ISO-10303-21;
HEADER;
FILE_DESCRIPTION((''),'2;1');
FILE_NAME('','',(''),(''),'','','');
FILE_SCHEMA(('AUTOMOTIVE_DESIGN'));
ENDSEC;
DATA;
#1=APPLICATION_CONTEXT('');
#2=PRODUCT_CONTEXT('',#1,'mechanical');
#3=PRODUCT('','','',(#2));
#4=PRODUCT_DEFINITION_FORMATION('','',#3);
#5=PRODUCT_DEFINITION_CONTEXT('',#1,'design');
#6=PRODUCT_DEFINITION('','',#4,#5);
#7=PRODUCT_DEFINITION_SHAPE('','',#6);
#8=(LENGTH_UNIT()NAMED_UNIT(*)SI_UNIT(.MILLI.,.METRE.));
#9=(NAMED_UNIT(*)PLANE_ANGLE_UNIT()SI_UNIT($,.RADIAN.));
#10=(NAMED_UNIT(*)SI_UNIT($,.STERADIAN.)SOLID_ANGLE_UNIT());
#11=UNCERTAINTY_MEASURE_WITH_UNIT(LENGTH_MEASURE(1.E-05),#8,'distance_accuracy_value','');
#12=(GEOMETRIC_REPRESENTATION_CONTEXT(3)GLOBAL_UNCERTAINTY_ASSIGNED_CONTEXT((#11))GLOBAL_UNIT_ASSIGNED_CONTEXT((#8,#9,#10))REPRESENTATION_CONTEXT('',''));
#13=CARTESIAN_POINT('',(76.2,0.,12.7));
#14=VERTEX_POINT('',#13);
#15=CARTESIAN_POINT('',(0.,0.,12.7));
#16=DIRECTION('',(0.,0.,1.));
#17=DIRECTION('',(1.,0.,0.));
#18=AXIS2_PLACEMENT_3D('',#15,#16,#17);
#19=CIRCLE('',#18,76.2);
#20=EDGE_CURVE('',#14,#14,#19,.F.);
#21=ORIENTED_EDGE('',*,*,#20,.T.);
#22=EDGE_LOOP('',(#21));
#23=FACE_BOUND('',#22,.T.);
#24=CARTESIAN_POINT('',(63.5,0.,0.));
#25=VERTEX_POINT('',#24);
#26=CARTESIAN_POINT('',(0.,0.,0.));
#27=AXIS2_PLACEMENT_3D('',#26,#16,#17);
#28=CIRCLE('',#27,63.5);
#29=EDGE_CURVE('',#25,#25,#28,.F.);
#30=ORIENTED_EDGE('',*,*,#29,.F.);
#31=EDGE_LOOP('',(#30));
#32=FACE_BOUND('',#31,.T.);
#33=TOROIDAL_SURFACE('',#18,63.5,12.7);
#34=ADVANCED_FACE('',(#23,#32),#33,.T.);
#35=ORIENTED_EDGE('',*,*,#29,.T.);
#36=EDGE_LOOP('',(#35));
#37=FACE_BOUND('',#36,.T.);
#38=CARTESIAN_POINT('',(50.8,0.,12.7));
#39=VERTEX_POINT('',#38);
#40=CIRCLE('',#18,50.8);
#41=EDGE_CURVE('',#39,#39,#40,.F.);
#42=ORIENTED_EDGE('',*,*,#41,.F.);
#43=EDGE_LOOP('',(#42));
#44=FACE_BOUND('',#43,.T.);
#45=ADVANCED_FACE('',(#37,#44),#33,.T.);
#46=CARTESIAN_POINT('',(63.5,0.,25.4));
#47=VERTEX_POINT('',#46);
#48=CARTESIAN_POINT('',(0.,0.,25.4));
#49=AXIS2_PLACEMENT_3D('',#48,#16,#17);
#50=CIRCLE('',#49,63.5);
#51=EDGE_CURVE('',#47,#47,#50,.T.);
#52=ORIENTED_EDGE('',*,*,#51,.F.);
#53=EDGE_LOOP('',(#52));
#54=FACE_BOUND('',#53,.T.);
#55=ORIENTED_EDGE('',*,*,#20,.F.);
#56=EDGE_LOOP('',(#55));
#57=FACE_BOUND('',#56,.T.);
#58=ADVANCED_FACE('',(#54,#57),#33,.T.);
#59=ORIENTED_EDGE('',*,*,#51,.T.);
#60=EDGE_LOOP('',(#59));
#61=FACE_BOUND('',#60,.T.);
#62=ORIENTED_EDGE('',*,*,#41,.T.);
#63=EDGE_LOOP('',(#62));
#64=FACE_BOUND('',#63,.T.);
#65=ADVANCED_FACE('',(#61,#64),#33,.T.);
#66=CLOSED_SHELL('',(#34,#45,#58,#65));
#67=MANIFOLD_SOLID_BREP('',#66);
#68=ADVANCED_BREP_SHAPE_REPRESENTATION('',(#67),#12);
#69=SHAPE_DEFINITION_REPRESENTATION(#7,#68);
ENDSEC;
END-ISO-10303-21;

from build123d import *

# Parameters (mm, degrees)
SKETCH1_R           = 76.2
SKETCH1_R_2         = 50.8
BOSS_EXTRUDE1_DEPTH = 25.4
FILLET1_R           = 12.7
FILLET2_R           = 12.7


with BuildPart() as part:
    # Sketch1 → Boss-Extrude1 (new body)
    with BuildSketch(Plane.XY):
        Circle(SKETCH1_R)
        Circle(SKETCH1_R_2, mode=Mode.SUBTRACT)
    extrude(amount=BOSS_EXTRUDE1_DEPTH)

    # Fillet1
    fillet1_edges = [part.edges().sort_by_distance(p)[0] for p in [
        (-76.2, 0, 0),
        (-76.2, 0, 25.4),
    ]]
    fillet(fillet1_edges, radius=FILLET1_R - 0.0001)  # a hair under: the kernel refuses the full size

    # Fillet2
    fillet2_edges = [part.edges().sort_by_distance(p)[0] for p in [
        (-50.8, 0, 0),
        (-50.8, 0, 25.4),
    ]]
    fillet(fillet2_edges, radius=FILLET2_R - 0.0001)  # a hair under: the kernel refuses the full size


solid = part.part
